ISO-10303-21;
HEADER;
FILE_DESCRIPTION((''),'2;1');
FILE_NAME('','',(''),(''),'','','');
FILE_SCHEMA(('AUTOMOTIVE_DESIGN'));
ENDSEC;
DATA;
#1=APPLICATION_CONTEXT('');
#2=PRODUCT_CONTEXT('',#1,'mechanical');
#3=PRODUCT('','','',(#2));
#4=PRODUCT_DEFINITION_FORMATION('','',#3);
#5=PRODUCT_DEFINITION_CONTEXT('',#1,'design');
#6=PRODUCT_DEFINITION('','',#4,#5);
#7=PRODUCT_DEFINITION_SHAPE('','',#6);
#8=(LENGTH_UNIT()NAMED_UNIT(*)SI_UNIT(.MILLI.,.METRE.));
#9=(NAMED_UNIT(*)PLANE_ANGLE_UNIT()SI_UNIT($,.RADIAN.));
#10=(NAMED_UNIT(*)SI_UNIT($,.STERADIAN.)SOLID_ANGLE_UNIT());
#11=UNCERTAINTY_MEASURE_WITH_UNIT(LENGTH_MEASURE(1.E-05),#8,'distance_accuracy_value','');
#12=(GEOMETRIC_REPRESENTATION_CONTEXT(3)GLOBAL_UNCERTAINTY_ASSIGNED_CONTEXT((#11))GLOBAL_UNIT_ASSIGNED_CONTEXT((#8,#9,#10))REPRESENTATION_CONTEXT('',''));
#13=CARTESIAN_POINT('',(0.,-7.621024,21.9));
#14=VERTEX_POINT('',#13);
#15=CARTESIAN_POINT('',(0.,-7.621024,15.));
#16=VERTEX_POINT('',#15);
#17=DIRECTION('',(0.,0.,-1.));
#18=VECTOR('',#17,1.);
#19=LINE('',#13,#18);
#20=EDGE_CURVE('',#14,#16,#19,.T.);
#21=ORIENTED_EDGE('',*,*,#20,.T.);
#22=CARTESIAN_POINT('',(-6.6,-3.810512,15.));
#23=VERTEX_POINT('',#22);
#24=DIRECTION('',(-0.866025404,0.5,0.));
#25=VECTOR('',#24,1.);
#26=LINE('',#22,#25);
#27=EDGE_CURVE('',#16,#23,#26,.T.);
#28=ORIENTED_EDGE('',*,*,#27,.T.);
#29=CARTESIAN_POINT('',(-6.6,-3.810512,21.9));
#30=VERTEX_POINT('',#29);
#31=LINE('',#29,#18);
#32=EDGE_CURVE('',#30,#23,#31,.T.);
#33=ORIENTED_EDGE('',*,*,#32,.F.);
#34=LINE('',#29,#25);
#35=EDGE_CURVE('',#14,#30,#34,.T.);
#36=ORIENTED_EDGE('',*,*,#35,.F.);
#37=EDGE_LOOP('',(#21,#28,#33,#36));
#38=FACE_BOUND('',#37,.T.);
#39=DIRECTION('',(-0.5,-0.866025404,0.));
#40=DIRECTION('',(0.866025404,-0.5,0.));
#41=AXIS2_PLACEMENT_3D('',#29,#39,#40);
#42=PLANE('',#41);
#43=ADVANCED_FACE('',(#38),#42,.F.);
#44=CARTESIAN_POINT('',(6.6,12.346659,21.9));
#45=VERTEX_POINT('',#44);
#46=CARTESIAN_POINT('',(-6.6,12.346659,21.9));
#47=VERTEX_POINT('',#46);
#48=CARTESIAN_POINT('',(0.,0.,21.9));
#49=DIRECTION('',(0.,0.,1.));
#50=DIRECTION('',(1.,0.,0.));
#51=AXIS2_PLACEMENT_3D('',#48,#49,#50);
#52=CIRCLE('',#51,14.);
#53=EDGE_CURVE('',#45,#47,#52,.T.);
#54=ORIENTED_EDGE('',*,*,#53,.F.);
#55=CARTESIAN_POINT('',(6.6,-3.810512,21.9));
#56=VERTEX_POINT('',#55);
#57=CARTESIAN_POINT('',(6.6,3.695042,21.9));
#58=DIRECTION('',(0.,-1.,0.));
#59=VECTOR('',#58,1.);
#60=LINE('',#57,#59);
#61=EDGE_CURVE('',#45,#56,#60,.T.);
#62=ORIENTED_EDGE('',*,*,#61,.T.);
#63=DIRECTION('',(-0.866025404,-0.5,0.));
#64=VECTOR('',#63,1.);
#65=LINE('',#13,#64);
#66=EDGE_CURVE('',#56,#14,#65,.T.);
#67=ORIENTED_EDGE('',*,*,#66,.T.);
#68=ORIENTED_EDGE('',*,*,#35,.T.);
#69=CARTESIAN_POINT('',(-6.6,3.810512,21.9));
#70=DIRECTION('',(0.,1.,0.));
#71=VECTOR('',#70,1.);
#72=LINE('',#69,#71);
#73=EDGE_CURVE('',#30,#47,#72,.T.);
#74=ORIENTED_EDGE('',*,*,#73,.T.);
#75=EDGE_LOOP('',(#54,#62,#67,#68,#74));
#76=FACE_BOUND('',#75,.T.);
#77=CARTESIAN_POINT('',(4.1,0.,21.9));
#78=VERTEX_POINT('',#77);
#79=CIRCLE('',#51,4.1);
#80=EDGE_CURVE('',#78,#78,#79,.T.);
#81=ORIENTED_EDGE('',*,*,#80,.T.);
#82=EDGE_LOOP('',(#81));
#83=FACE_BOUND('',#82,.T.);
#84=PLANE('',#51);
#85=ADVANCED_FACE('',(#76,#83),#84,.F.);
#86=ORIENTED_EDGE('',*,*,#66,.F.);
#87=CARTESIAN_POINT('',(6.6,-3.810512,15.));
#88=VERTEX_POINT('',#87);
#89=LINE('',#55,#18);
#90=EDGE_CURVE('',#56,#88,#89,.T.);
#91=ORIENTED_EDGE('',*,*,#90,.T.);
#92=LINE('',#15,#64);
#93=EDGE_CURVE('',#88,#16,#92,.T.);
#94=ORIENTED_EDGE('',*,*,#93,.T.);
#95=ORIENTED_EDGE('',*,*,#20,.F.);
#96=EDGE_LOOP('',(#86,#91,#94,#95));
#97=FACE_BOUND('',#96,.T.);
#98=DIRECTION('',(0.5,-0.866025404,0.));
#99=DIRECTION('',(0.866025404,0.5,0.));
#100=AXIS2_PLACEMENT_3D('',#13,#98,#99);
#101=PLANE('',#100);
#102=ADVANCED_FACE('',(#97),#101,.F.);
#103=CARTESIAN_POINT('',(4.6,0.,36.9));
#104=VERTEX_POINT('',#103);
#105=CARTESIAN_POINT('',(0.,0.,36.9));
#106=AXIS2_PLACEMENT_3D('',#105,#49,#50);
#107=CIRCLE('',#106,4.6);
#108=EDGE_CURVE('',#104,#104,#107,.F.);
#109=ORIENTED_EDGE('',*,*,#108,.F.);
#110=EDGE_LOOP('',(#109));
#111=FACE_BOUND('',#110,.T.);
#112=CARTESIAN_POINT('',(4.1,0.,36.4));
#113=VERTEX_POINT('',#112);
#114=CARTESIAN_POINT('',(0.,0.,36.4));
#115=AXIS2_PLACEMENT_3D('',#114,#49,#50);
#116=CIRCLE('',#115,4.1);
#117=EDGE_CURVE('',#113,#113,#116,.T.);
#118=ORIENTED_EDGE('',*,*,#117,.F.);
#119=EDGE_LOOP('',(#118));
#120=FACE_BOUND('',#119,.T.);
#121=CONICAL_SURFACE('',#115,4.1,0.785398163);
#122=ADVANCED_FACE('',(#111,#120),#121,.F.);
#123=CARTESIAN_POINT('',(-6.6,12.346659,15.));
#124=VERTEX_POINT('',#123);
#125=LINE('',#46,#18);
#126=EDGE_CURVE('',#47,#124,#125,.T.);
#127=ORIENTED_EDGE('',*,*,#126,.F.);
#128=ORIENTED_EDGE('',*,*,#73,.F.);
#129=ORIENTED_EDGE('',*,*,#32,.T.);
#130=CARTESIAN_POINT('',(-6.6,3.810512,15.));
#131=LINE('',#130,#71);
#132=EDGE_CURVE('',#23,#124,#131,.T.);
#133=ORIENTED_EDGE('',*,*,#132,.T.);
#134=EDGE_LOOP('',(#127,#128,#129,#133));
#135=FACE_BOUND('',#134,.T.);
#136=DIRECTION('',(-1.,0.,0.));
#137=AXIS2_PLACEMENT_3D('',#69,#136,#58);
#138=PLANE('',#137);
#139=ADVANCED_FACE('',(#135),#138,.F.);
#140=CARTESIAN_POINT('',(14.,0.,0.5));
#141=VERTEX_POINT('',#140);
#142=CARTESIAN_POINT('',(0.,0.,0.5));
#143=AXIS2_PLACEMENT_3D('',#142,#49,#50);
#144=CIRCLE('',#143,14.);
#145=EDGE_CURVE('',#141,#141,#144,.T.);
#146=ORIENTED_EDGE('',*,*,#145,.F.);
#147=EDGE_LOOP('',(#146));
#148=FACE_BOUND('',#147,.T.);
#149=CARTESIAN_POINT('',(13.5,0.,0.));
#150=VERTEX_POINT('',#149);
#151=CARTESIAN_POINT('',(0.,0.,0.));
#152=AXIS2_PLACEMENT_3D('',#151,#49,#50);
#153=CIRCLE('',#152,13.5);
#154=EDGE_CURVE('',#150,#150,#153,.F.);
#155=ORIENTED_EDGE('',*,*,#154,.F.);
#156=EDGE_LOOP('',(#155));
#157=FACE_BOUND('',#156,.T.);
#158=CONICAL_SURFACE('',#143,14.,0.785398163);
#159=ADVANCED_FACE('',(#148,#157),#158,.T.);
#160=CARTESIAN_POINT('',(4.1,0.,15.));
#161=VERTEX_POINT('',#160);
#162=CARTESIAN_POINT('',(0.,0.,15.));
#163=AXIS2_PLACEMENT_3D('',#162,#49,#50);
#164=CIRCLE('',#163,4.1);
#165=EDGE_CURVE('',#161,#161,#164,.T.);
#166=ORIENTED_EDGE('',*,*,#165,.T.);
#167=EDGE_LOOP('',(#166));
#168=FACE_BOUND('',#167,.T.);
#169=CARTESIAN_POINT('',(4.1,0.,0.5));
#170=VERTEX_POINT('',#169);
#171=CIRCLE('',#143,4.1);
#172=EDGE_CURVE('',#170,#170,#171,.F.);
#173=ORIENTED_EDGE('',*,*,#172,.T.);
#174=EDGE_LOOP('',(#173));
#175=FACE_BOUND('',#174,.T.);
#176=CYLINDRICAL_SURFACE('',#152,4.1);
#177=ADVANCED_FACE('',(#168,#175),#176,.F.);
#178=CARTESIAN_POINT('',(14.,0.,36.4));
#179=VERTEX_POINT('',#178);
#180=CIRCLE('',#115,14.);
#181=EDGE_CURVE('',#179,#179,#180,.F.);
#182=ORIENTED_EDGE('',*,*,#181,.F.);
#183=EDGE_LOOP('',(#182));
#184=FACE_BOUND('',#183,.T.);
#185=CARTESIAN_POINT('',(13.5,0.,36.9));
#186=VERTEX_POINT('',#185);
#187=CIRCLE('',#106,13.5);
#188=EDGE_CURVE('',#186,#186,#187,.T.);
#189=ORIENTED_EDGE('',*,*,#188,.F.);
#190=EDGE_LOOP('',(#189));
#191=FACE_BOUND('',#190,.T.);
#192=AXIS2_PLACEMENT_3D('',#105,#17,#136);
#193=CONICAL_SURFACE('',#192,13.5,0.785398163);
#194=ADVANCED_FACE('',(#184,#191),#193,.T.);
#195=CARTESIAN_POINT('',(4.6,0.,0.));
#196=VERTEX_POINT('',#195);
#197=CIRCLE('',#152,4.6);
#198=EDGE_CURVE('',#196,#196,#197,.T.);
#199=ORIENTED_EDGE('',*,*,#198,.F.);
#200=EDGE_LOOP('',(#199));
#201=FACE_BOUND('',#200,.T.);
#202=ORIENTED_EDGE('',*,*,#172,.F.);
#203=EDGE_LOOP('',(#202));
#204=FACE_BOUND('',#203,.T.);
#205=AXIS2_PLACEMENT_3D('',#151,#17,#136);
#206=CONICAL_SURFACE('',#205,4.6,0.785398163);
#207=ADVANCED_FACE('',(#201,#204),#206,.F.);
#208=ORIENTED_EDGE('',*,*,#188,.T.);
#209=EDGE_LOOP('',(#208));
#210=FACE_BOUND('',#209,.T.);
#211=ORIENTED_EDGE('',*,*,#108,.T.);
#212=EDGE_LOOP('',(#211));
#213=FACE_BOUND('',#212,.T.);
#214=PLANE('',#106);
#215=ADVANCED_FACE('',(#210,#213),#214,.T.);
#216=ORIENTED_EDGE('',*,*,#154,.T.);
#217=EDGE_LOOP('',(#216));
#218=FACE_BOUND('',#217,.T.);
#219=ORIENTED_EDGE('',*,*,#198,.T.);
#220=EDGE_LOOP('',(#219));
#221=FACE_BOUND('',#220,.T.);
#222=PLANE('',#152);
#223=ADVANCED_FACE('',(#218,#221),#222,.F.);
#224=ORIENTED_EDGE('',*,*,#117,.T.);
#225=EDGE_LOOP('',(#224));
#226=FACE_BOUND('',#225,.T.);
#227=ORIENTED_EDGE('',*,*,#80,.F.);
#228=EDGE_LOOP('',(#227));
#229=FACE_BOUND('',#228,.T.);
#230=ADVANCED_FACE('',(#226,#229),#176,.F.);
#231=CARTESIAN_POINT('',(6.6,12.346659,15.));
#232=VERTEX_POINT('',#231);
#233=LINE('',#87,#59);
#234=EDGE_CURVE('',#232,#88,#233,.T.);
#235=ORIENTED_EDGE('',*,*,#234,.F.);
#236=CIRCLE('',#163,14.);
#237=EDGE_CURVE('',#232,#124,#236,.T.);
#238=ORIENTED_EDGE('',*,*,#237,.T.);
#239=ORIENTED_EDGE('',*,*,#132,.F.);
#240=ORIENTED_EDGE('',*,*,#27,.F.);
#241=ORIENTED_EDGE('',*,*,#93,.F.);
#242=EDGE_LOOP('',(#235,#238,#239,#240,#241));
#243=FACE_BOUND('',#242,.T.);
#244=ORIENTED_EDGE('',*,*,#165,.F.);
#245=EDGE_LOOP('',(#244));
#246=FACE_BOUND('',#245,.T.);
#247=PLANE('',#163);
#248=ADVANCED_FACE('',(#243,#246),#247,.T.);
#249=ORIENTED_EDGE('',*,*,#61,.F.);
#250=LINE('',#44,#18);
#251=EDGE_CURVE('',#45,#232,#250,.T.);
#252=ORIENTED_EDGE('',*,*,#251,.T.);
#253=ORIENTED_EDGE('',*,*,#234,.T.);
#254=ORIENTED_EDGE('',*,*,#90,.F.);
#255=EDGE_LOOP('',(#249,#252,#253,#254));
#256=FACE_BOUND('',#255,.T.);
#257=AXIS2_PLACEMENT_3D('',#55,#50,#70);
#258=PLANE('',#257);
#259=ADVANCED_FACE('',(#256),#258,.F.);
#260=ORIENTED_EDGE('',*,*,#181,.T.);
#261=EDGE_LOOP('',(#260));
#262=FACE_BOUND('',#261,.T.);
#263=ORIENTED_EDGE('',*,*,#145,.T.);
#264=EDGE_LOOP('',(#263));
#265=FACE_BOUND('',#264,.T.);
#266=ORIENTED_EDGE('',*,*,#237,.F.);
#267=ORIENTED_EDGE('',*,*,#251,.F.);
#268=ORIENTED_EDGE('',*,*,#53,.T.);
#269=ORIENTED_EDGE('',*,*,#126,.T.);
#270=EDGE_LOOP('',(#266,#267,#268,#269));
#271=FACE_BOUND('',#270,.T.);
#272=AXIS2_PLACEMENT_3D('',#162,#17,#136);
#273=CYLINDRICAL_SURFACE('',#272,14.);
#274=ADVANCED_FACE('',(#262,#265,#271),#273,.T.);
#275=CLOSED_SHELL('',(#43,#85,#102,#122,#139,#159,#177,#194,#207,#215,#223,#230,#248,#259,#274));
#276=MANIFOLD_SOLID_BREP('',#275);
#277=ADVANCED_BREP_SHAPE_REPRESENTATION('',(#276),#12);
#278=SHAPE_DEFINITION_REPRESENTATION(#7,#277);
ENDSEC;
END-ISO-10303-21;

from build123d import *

# Parameters (mm, degrees)
SKETCH1_R           = 14
BOSS_EXTRUDE1_DEPTH = 15
BOSS_EXTRUDE2_DEPTH = 6.9
BOSS_EXTRUDE3_DEPTH = 15
SKETCH4_R           = 4.1
CUT_EXTRUDE1_DEPTH  = 42.876126850509955


with BuildPart() as part:
    # Sketch1 → Boss-Extrude1 (new body)
    with BuildSketch(Plane.XY):
        Circle(SKETCH1_R)
    extrude(amount=BOSS_EXTRUDE1_DEPTH)

    # Sketch2 → Boss-Extrude2 (add)
    with BuildSketch(Plane.XY.offset(15)):
        with BuildLine():
            Line((-6.600000000000001, 3.810511776651534), (-6.600000000000002, 12.34665946724052))
            ThreePointArc((-6.600000000000002, 12.34665946724052), (-2.57e-15, -14), (6.599999999999997, 12.34665946724052))
            Line((6.599999999999997, 12.34665946724052), (6.599999999999997, 3.695041722813614))
            Line((6.599999999999997, 3.695041722813614), (6.599999999999998, -3.810511776651528))
            Line((6.599999999999998, -3.810511776651528), (-1.31e-15, -7.62102355330306))
            Line((-1.31e-15, -7.62102355330306), (-6.600000000000001, -3.8105117766515293))
            Line((-6.600000000000001, -3.8105117766515293), (-6.600000000000001, 3.810511776651534))
        make_face()
    extrude(amount=BOSS_EXTRUDE2_DEPTH)

    # Sketch3 → Boss-Extrude3 (add)
    with BuildSketch(Plane.XY.offset(21.9)):
        with BuildLine():
            ThreePointArc((6.599999999999995, 12.346659467240523), (-2.25e-15, 13.999999999999998), (-6.600000000000002, 12.34665946724052))
            ThreePointArc((-6.600000000000002, 12.34665946724052), (-2.57e-15, -14), (6.599999999999995, 12.346659467240523))
        make_face()
    extrude(amount=BOSS_EXTRUDE3_DEPTH)

    # Sketch4 → Cut-Extrude1 (cut, through all)
    with BuildSketch(Plane.XY.offset(36.900000000000006)):
        Circle(SKETCH4_R)
    extrude(amount=-CUT_EXTRUDE1_DEPTH, mode=Mode.SUBTRACT)

    # Chamfer1
    # the kernel refuses this chamfer: 0.5 mm, written as the material it takes off along each edge
    with BuildSketch(Plane(origin=(0, 0, 0), x_dir=(1, 0, 0), z_dir=(0, -1, 0))) as chamfer1_piece_1:
        with BuildLine():
            Line((14.01414213562373, 0.5141421356237309), (13.48585786437627, -0.01414213562373095))
            Line((13.48585786437627, -0.01414213562373095), (13.48585786437627, -0.02414213562373095))
            ThreePointArc((13.48585786437627, -0.02414213562373095), (13.742928932188136, -0.01), (14, -0.01))
            Line((14, -0.01), (14.01, 0))
            ThreePointArc((14.01, 0), (14.01, 0.25707106781186545), (14.02414213562373, 0.5141421356237309))
            Line((14.02414213562373, 0.5141421356237309), (14.01414213562373, 0.5141421356237309))
        make_face()
    revolve(axis=Axis((0, 0, 0), (0, 0, 1)), mode=Mode.SUBTRACT)
    with BuildSketch(Plane(origin=(1.11e-15, 1.7e-16, 36.9), x_dir=(0.4714285714285716, 0.8819042476600372, 0), z_dir=(-0.8819042476600372, 0.4714285714285716, 0))) as chamfer1_piece_2:
        with BuildLine():
            Line((14.01414213562373, 0.5141421356237288), (13.48585786437627, -0.01414213562372879))
            Line((13.48585786437627, -0.01414213562372879), (13.48585786437627, -0.0241421356237268))
            ThreePointArc((13.48585786437627, -0.0241421356237268), (13.742928932188134, -0.00999999999999801), (14, -0.00999999999999801))
            Line((14, -0.00999999999999801), (14.01, 0))
            ThreePointArc((14.01, 0), (14.01, 0.2570710678118644), (14.02414213562373, 0.5141421356237288))
            Line((14.02414213562373, 0.5141421356237288), (14.01414213562373, 0.5141421356237288))
        make_face()
    revolve(axis=Axis((1.11e-15, 1.7e-16, 36.9), (0, 0, -1)), mode=Mode.SUBTRACT)
    with BuildSketch(Plane(origin=(0, 0, 0), x_dir=(1, 0, 0), z_dir=(0, -1, 0))) as chamfer1_piece_3:
        with BuildLine():
            Line((4.61414213562373, -0.01414213562373095), (4.085857864376269, 0.5141421356237309))
            Line((4.085857864376269, 0.5141421356237309), (4.075857864376269, 0.5141421356237309))
            ThreePointArc((4.075857864376269, 0.5141421356237309), (4.09, 0.2570710678118644), (4.09, 0))
            Line((4.09, 0), (4.1, -0.01))
            ThreePointArc((4.1, -0.01), (4.357071067811865, -0.01), (4.61414213562373, -0.02414213562373095))
            Line((4.61414213562373, -0.02414213562373095), (4.61414213562373, -0.01414213562373095))
        make_face()
    revolve(axis=Axis((0, 0, 0), (0, 0, 1)), mode=Mode.SUBTRACT)
    with BuildSketch(Plane(origin=(0, 0, 36.900000000000006), x_dir=(1, 0, 0), z_dir=(0, -1, 0))) as chamfer1_piece_4:
        with BuildLine():
            Line((4.614142135623731, 0.01414213562372169), (4.085857864376268, -0.5141421356237288))
            Line((4.085857864376268, -0.5141421356237288), (4.075857864376268, -0.5141421356237288))
            ThreePointArc((4.075857864376268, -0.5141421356237288), (4.09, -0.2570710678118644), (4.09, 0))
            Line((4.09, 0), (4.1, 0.00999999999999801))
            ThreePointArc((4.1, 0.00999999999999801), (4.357071067811866, 0.00999999999999091), (4.614142135623731, 0.0241421356237197))
            Line((4.614142135623731, 0.0241421356237197), (4.614142135623731, 0.01414213562372169))
        make_face()
    revolve(axis=Axis((0, 0, 36.900000000000006), (0, 0, 1)), mode=Mode.SUBTRACT)


solid = part.part
